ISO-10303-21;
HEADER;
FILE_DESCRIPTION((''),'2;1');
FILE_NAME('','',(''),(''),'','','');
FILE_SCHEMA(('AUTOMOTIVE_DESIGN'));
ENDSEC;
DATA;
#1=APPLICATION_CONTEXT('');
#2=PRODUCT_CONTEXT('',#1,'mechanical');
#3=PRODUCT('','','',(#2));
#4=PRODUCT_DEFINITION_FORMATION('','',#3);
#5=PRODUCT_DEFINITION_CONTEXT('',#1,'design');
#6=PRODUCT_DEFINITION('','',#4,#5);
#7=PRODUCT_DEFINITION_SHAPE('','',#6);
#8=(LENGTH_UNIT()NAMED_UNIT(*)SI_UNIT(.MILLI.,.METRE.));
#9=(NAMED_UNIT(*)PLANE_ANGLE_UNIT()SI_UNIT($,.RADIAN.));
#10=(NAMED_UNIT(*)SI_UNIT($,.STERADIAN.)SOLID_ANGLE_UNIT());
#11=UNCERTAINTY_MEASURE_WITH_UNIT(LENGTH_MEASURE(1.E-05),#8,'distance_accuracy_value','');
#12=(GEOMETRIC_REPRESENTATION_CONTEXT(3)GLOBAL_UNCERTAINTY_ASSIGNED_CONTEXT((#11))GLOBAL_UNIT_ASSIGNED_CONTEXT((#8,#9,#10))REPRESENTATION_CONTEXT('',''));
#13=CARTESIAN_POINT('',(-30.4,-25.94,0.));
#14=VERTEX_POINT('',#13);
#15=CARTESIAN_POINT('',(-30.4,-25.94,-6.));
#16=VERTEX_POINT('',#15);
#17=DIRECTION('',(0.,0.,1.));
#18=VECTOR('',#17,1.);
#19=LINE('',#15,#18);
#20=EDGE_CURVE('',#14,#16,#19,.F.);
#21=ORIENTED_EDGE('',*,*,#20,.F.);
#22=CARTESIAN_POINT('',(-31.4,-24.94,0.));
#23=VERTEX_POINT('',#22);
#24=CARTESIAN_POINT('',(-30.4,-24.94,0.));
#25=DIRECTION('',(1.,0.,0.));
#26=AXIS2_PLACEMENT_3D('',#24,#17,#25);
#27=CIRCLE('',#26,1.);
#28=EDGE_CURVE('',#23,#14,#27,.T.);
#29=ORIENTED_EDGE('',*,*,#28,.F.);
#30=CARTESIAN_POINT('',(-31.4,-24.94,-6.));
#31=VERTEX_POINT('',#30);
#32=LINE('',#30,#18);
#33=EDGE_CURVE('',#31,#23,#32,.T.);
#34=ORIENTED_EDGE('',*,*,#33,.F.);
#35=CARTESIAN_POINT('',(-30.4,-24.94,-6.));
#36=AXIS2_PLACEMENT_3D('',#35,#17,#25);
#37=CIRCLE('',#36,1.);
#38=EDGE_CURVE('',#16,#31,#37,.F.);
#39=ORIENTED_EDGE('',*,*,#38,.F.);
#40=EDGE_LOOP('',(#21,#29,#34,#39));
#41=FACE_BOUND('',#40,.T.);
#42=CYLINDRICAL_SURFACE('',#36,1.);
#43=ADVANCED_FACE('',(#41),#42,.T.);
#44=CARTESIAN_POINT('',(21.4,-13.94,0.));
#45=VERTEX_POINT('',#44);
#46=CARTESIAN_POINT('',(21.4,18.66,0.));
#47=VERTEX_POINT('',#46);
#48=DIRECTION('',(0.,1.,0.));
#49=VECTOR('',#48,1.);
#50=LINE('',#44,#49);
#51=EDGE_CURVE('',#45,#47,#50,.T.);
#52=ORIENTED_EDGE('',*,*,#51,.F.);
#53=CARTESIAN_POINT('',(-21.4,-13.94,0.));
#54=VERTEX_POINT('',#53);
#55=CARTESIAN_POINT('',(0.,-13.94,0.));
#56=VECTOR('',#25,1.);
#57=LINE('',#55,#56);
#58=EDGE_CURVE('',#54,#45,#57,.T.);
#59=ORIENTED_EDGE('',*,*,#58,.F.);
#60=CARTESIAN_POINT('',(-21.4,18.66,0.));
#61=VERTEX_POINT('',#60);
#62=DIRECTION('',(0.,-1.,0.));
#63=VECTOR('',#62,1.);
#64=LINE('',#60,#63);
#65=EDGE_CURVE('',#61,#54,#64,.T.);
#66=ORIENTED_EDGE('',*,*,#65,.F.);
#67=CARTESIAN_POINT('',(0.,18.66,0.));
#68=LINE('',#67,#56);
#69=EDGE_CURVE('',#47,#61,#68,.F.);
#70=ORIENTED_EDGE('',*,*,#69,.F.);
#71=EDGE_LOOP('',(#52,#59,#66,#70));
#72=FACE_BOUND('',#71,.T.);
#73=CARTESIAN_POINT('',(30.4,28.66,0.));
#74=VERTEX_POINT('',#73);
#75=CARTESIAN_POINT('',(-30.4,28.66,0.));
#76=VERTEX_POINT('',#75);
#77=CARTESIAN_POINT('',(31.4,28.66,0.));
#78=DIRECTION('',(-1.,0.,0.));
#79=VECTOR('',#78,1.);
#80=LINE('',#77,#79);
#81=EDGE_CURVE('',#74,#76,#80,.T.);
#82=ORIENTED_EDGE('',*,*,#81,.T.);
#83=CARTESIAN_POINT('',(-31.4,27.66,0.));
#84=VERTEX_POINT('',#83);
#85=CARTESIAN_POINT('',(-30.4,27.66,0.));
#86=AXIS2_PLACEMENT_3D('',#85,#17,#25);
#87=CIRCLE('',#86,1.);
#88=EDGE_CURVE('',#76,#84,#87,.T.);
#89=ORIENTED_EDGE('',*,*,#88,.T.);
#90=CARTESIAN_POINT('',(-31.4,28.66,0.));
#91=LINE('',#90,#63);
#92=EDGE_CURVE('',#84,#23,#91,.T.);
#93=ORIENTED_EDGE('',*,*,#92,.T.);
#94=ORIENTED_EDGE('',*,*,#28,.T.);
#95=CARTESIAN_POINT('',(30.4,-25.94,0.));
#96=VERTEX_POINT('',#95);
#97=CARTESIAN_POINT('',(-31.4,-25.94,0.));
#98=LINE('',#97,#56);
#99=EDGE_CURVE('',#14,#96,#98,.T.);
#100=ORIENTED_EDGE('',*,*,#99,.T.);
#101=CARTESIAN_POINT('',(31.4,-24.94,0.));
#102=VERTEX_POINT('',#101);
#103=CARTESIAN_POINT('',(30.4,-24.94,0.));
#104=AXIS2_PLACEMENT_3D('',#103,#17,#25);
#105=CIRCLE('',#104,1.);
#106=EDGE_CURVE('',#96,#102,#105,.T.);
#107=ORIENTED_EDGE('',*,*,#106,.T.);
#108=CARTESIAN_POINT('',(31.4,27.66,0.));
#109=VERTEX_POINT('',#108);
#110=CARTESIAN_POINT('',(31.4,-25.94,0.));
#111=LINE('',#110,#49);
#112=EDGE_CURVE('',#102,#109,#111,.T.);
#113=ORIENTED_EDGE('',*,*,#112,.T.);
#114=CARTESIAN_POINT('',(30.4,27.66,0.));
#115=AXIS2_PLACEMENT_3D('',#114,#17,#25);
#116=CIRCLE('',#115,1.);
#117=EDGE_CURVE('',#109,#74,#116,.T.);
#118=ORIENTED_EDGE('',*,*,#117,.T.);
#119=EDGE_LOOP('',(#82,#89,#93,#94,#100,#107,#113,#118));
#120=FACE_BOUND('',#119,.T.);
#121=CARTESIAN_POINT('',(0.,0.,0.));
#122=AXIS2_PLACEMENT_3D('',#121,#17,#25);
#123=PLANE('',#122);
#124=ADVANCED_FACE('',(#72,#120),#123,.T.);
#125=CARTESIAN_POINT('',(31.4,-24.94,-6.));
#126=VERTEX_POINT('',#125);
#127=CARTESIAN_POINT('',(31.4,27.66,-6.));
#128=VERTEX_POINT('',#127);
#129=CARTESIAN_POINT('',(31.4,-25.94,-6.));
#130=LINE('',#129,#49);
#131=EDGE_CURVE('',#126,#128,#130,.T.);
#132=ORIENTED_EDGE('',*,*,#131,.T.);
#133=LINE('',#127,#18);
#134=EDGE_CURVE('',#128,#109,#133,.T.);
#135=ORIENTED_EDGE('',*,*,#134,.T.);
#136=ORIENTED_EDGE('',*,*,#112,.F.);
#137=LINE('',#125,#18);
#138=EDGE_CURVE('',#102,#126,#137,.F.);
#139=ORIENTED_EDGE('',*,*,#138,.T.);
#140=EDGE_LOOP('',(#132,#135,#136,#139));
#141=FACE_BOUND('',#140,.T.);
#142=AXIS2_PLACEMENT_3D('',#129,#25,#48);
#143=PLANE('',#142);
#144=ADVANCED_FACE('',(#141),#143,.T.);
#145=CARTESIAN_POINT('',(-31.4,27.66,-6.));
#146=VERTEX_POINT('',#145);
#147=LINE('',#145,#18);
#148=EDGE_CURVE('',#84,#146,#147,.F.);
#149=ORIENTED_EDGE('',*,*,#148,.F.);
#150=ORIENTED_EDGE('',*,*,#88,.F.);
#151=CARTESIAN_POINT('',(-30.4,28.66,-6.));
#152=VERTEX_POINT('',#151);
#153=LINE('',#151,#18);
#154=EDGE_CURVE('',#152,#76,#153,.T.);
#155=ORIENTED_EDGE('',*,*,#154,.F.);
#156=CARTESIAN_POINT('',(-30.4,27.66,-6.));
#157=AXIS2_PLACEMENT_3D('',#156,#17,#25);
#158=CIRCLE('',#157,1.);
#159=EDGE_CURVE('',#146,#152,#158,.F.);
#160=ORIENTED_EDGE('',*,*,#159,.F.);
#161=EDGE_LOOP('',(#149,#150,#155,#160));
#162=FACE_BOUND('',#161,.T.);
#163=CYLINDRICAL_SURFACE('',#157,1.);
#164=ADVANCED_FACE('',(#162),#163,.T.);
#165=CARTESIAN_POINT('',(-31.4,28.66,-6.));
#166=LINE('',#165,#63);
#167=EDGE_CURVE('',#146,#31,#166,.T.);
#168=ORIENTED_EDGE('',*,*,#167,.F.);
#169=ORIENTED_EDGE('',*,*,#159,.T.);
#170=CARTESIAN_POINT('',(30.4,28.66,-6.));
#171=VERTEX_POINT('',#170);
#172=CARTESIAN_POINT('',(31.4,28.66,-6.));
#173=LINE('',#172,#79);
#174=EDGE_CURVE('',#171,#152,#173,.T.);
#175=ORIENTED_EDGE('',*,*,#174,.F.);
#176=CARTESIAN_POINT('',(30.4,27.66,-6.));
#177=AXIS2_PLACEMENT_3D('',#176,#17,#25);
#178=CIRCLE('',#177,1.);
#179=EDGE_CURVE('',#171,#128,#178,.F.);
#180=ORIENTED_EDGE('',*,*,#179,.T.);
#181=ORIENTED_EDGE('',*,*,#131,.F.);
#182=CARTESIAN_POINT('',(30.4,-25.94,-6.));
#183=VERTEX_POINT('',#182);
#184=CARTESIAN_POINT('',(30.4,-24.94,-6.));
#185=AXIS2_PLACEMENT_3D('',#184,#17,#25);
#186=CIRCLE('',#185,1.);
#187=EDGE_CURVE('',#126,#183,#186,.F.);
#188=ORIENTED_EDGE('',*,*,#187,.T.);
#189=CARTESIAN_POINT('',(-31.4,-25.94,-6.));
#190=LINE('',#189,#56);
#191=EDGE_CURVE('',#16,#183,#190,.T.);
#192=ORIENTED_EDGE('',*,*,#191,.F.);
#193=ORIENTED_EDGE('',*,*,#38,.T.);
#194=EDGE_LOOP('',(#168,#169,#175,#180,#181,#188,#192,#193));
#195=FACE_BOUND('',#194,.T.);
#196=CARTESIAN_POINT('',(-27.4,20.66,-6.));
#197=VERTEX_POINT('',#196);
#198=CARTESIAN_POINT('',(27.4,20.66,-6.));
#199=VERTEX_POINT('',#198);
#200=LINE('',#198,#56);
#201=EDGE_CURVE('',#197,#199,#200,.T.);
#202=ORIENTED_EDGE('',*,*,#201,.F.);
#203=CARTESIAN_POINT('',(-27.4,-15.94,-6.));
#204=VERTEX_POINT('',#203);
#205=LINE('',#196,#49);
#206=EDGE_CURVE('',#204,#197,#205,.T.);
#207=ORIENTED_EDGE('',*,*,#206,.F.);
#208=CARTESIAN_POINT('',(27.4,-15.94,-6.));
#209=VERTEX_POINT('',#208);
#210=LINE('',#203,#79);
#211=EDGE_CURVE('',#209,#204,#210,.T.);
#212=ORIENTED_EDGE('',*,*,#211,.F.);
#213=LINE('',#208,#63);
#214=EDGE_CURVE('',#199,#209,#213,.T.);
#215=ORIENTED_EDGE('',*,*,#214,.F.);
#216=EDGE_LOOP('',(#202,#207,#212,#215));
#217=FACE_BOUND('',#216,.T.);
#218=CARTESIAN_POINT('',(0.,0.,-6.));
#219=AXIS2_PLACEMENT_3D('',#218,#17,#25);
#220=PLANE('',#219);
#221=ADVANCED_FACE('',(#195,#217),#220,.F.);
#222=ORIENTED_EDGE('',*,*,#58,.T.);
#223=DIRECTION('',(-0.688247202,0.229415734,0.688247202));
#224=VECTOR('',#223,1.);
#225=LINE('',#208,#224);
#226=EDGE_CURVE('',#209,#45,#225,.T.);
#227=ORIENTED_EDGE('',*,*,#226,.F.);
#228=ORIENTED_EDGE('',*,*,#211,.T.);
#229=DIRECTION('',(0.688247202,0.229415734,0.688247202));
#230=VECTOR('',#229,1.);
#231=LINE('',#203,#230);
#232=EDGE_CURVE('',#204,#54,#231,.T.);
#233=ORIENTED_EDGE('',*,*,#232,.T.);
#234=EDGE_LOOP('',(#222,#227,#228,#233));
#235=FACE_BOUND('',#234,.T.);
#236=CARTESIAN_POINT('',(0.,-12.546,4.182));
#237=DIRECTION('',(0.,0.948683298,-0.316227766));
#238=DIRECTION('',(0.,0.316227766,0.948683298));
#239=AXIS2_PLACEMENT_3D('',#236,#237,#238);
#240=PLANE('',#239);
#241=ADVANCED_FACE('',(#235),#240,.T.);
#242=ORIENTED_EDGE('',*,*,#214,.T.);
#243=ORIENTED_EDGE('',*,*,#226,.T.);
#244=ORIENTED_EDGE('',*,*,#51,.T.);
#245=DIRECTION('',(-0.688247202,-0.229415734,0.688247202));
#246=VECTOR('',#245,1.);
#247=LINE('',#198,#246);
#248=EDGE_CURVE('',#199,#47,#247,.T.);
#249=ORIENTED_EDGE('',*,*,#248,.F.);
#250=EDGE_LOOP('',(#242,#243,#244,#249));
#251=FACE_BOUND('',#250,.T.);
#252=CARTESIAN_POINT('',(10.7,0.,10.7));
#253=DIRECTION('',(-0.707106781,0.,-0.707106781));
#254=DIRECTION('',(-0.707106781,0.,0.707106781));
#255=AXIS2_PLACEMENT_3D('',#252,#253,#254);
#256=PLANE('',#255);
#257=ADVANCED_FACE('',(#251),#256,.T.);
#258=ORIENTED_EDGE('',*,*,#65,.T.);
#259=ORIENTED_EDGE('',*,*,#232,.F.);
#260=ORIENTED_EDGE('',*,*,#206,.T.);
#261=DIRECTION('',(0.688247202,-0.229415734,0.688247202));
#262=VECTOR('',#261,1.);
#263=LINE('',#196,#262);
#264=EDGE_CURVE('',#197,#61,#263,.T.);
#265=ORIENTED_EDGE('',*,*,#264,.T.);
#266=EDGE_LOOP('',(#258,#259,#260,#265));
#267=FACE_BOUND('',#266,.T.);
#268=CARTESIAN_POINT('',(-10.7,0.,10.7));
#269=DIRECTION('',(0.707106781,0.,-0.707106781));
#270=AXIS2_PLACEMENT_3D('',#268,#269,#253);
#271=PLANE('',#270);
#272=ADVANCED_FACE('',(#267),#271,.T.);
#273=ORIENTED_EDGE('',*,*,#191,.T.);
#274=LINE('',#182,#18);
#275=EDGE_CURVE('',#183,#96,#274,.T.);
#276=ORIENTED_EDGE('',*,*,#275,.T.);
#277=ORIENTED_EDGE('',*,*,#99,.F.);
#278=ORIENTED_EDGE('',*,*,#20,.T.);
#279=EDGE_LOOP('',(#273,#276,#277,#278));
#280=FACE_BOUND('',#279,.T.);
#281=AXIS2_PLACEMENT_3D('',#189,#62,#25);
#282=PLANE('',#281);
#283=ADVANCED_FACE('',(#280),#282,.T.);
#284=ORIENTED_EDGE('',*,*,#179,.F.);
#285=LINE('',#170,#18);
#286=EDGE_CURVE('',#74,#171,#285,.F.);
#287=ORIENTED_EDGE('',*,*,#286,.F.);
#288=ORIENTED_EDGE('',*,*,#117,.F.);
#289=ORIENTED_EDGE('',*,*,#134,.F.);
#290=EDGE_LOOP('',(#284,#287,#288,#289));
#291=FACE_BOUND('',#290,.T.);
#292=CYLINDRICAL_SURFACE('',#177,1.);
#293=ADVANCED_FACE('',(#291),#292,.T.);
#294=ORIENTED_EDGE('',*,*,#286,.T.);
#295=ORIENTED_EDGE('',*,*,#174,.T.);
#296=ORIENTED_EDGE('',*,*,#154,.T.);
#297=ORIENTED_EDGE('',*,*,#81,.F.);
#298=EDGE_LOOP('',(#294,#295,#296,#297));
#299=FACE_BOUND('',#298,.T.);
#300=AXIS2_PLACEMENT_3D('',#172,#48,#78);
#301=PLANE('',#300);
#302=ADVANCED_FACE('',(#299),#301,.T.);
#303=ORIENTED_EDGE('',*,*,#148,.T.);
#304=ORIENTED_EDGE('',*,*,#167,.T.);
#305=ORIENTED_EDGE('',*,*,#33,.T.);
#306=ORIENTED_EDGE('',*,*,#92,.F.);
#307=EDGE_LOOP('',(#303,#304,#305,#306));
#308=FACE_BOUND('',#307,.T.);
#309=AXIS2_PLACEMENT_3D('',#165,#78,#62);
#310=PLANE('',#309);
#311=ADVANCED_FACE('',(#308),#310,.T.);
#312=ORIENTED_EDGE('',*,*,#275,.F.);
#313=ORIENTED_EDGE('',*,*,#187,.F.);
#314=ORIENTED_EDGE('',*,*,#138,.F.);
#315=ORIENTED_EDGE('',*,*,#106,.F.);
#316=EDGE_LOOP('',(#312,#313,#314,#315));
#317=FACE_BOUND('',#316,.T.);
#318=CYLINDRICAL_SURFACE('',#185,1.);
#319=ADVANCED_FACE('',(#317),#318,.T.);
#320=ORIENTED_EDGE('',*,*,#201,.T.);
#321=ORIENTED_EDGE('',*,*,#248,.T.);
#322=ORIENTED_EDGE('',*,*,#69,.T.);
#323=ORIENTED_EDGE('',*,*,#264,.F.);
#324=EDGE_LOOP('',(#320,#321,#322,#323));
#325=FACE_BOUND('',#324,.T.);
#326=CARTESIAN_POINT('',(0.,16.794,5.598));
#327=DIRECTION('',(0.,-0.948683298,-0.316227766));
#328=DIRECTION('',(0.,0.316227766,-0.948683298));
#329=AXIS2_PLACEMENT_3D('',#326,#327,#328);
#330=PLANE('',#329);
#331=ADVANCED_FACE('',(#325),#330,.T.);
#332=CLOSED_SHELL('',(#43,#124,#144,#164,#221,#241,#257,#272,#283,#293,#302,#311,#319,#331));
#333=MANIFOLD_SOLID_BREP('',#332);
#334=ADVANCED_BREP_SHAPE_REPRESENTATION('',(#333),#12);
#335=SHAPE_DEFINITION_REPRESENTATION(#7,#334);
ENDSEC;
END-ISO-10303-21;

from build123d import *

# Parameters (mm, degrees)
SKETCH1_W           = 62.8
SKETCH1_H           = 54.6
SKETCH1_W_2         = 42.8
SKETCH1_H_2         = 32.6
BOSS_EXTRUDE1_DEPTH = 6
FILLET1_R           = 1


with BuildPart() as part:
    # Sketch1 → Boss-Extrude1 (new body)
    with BuildSketch(Plane.XY):
        with Locations((0, 1.36)):
            Rectangle(SKETCH1_W, SKETCH1_H)
        with Locations((0, 2.36)):
            Rectangle(SKETCH1_W_2, SKETCH1_H_2, mode=Mode.SUBTRACT)
    extrude(amount=-BOSS_EXTRUDE1_DEPTH)

    # Cut-Loft3: read off the stored shape, not the designer's step
    # Cut-Loft3: loft between two sections, ruled curve by curve
    cut_loft3_from = [
        Edge.make_line((-27.4, -15.94, -6), (-27.4, 20.66, -6)),
        Edge.make_line((-27.4, 20.66, -6), (27.4, 20.66, -6)),
        Edge.make_line((27.4, -15.94, -6), (-27.4, -15.94, -6)),
        Edge.make_line((27.4, 20.66, -6), (27.4, -15.94, -6)),
    ]
    cut_loft3_to = [
        Edge.make_line((-21.4, -13.94, 0), (-21.4, 18.66, 0)),
        Edge.make_line((-21.4, 18.66, 0), (21.4, 18.66, 0)),
        Edge.make_line((21.4, -13.94, 0), (-21.4, -13.94, 0)),
        Edge.make_line((21.4, 18.66, 0), (21.4, -13.94, 0)),
    ]
    cut_loft3 = Solid(Shell([*[Face.make_surface_from_curves(cut_loft3_from[k], cut_loft3_to[k]) for k in range(4)], Face(Wire(cut_loft3_from)), Face(Wire(cut_loft3_to))]))
    add(cut_loft3, mode=Mode.SUBTRACT)

    # Fillet1
    fillet1_edges = [part.edges().sort_by_distance(p)[0] for p in [
        (-31.4, -25.94, -3),
        (-31.4, 28.66, -3),
        (31.4, 28.66, -3),
        (31.4, -25.94, -3),
    ]]
    fillet(fillet1_edges, radius=FILLET1_R)


solid = part.part
